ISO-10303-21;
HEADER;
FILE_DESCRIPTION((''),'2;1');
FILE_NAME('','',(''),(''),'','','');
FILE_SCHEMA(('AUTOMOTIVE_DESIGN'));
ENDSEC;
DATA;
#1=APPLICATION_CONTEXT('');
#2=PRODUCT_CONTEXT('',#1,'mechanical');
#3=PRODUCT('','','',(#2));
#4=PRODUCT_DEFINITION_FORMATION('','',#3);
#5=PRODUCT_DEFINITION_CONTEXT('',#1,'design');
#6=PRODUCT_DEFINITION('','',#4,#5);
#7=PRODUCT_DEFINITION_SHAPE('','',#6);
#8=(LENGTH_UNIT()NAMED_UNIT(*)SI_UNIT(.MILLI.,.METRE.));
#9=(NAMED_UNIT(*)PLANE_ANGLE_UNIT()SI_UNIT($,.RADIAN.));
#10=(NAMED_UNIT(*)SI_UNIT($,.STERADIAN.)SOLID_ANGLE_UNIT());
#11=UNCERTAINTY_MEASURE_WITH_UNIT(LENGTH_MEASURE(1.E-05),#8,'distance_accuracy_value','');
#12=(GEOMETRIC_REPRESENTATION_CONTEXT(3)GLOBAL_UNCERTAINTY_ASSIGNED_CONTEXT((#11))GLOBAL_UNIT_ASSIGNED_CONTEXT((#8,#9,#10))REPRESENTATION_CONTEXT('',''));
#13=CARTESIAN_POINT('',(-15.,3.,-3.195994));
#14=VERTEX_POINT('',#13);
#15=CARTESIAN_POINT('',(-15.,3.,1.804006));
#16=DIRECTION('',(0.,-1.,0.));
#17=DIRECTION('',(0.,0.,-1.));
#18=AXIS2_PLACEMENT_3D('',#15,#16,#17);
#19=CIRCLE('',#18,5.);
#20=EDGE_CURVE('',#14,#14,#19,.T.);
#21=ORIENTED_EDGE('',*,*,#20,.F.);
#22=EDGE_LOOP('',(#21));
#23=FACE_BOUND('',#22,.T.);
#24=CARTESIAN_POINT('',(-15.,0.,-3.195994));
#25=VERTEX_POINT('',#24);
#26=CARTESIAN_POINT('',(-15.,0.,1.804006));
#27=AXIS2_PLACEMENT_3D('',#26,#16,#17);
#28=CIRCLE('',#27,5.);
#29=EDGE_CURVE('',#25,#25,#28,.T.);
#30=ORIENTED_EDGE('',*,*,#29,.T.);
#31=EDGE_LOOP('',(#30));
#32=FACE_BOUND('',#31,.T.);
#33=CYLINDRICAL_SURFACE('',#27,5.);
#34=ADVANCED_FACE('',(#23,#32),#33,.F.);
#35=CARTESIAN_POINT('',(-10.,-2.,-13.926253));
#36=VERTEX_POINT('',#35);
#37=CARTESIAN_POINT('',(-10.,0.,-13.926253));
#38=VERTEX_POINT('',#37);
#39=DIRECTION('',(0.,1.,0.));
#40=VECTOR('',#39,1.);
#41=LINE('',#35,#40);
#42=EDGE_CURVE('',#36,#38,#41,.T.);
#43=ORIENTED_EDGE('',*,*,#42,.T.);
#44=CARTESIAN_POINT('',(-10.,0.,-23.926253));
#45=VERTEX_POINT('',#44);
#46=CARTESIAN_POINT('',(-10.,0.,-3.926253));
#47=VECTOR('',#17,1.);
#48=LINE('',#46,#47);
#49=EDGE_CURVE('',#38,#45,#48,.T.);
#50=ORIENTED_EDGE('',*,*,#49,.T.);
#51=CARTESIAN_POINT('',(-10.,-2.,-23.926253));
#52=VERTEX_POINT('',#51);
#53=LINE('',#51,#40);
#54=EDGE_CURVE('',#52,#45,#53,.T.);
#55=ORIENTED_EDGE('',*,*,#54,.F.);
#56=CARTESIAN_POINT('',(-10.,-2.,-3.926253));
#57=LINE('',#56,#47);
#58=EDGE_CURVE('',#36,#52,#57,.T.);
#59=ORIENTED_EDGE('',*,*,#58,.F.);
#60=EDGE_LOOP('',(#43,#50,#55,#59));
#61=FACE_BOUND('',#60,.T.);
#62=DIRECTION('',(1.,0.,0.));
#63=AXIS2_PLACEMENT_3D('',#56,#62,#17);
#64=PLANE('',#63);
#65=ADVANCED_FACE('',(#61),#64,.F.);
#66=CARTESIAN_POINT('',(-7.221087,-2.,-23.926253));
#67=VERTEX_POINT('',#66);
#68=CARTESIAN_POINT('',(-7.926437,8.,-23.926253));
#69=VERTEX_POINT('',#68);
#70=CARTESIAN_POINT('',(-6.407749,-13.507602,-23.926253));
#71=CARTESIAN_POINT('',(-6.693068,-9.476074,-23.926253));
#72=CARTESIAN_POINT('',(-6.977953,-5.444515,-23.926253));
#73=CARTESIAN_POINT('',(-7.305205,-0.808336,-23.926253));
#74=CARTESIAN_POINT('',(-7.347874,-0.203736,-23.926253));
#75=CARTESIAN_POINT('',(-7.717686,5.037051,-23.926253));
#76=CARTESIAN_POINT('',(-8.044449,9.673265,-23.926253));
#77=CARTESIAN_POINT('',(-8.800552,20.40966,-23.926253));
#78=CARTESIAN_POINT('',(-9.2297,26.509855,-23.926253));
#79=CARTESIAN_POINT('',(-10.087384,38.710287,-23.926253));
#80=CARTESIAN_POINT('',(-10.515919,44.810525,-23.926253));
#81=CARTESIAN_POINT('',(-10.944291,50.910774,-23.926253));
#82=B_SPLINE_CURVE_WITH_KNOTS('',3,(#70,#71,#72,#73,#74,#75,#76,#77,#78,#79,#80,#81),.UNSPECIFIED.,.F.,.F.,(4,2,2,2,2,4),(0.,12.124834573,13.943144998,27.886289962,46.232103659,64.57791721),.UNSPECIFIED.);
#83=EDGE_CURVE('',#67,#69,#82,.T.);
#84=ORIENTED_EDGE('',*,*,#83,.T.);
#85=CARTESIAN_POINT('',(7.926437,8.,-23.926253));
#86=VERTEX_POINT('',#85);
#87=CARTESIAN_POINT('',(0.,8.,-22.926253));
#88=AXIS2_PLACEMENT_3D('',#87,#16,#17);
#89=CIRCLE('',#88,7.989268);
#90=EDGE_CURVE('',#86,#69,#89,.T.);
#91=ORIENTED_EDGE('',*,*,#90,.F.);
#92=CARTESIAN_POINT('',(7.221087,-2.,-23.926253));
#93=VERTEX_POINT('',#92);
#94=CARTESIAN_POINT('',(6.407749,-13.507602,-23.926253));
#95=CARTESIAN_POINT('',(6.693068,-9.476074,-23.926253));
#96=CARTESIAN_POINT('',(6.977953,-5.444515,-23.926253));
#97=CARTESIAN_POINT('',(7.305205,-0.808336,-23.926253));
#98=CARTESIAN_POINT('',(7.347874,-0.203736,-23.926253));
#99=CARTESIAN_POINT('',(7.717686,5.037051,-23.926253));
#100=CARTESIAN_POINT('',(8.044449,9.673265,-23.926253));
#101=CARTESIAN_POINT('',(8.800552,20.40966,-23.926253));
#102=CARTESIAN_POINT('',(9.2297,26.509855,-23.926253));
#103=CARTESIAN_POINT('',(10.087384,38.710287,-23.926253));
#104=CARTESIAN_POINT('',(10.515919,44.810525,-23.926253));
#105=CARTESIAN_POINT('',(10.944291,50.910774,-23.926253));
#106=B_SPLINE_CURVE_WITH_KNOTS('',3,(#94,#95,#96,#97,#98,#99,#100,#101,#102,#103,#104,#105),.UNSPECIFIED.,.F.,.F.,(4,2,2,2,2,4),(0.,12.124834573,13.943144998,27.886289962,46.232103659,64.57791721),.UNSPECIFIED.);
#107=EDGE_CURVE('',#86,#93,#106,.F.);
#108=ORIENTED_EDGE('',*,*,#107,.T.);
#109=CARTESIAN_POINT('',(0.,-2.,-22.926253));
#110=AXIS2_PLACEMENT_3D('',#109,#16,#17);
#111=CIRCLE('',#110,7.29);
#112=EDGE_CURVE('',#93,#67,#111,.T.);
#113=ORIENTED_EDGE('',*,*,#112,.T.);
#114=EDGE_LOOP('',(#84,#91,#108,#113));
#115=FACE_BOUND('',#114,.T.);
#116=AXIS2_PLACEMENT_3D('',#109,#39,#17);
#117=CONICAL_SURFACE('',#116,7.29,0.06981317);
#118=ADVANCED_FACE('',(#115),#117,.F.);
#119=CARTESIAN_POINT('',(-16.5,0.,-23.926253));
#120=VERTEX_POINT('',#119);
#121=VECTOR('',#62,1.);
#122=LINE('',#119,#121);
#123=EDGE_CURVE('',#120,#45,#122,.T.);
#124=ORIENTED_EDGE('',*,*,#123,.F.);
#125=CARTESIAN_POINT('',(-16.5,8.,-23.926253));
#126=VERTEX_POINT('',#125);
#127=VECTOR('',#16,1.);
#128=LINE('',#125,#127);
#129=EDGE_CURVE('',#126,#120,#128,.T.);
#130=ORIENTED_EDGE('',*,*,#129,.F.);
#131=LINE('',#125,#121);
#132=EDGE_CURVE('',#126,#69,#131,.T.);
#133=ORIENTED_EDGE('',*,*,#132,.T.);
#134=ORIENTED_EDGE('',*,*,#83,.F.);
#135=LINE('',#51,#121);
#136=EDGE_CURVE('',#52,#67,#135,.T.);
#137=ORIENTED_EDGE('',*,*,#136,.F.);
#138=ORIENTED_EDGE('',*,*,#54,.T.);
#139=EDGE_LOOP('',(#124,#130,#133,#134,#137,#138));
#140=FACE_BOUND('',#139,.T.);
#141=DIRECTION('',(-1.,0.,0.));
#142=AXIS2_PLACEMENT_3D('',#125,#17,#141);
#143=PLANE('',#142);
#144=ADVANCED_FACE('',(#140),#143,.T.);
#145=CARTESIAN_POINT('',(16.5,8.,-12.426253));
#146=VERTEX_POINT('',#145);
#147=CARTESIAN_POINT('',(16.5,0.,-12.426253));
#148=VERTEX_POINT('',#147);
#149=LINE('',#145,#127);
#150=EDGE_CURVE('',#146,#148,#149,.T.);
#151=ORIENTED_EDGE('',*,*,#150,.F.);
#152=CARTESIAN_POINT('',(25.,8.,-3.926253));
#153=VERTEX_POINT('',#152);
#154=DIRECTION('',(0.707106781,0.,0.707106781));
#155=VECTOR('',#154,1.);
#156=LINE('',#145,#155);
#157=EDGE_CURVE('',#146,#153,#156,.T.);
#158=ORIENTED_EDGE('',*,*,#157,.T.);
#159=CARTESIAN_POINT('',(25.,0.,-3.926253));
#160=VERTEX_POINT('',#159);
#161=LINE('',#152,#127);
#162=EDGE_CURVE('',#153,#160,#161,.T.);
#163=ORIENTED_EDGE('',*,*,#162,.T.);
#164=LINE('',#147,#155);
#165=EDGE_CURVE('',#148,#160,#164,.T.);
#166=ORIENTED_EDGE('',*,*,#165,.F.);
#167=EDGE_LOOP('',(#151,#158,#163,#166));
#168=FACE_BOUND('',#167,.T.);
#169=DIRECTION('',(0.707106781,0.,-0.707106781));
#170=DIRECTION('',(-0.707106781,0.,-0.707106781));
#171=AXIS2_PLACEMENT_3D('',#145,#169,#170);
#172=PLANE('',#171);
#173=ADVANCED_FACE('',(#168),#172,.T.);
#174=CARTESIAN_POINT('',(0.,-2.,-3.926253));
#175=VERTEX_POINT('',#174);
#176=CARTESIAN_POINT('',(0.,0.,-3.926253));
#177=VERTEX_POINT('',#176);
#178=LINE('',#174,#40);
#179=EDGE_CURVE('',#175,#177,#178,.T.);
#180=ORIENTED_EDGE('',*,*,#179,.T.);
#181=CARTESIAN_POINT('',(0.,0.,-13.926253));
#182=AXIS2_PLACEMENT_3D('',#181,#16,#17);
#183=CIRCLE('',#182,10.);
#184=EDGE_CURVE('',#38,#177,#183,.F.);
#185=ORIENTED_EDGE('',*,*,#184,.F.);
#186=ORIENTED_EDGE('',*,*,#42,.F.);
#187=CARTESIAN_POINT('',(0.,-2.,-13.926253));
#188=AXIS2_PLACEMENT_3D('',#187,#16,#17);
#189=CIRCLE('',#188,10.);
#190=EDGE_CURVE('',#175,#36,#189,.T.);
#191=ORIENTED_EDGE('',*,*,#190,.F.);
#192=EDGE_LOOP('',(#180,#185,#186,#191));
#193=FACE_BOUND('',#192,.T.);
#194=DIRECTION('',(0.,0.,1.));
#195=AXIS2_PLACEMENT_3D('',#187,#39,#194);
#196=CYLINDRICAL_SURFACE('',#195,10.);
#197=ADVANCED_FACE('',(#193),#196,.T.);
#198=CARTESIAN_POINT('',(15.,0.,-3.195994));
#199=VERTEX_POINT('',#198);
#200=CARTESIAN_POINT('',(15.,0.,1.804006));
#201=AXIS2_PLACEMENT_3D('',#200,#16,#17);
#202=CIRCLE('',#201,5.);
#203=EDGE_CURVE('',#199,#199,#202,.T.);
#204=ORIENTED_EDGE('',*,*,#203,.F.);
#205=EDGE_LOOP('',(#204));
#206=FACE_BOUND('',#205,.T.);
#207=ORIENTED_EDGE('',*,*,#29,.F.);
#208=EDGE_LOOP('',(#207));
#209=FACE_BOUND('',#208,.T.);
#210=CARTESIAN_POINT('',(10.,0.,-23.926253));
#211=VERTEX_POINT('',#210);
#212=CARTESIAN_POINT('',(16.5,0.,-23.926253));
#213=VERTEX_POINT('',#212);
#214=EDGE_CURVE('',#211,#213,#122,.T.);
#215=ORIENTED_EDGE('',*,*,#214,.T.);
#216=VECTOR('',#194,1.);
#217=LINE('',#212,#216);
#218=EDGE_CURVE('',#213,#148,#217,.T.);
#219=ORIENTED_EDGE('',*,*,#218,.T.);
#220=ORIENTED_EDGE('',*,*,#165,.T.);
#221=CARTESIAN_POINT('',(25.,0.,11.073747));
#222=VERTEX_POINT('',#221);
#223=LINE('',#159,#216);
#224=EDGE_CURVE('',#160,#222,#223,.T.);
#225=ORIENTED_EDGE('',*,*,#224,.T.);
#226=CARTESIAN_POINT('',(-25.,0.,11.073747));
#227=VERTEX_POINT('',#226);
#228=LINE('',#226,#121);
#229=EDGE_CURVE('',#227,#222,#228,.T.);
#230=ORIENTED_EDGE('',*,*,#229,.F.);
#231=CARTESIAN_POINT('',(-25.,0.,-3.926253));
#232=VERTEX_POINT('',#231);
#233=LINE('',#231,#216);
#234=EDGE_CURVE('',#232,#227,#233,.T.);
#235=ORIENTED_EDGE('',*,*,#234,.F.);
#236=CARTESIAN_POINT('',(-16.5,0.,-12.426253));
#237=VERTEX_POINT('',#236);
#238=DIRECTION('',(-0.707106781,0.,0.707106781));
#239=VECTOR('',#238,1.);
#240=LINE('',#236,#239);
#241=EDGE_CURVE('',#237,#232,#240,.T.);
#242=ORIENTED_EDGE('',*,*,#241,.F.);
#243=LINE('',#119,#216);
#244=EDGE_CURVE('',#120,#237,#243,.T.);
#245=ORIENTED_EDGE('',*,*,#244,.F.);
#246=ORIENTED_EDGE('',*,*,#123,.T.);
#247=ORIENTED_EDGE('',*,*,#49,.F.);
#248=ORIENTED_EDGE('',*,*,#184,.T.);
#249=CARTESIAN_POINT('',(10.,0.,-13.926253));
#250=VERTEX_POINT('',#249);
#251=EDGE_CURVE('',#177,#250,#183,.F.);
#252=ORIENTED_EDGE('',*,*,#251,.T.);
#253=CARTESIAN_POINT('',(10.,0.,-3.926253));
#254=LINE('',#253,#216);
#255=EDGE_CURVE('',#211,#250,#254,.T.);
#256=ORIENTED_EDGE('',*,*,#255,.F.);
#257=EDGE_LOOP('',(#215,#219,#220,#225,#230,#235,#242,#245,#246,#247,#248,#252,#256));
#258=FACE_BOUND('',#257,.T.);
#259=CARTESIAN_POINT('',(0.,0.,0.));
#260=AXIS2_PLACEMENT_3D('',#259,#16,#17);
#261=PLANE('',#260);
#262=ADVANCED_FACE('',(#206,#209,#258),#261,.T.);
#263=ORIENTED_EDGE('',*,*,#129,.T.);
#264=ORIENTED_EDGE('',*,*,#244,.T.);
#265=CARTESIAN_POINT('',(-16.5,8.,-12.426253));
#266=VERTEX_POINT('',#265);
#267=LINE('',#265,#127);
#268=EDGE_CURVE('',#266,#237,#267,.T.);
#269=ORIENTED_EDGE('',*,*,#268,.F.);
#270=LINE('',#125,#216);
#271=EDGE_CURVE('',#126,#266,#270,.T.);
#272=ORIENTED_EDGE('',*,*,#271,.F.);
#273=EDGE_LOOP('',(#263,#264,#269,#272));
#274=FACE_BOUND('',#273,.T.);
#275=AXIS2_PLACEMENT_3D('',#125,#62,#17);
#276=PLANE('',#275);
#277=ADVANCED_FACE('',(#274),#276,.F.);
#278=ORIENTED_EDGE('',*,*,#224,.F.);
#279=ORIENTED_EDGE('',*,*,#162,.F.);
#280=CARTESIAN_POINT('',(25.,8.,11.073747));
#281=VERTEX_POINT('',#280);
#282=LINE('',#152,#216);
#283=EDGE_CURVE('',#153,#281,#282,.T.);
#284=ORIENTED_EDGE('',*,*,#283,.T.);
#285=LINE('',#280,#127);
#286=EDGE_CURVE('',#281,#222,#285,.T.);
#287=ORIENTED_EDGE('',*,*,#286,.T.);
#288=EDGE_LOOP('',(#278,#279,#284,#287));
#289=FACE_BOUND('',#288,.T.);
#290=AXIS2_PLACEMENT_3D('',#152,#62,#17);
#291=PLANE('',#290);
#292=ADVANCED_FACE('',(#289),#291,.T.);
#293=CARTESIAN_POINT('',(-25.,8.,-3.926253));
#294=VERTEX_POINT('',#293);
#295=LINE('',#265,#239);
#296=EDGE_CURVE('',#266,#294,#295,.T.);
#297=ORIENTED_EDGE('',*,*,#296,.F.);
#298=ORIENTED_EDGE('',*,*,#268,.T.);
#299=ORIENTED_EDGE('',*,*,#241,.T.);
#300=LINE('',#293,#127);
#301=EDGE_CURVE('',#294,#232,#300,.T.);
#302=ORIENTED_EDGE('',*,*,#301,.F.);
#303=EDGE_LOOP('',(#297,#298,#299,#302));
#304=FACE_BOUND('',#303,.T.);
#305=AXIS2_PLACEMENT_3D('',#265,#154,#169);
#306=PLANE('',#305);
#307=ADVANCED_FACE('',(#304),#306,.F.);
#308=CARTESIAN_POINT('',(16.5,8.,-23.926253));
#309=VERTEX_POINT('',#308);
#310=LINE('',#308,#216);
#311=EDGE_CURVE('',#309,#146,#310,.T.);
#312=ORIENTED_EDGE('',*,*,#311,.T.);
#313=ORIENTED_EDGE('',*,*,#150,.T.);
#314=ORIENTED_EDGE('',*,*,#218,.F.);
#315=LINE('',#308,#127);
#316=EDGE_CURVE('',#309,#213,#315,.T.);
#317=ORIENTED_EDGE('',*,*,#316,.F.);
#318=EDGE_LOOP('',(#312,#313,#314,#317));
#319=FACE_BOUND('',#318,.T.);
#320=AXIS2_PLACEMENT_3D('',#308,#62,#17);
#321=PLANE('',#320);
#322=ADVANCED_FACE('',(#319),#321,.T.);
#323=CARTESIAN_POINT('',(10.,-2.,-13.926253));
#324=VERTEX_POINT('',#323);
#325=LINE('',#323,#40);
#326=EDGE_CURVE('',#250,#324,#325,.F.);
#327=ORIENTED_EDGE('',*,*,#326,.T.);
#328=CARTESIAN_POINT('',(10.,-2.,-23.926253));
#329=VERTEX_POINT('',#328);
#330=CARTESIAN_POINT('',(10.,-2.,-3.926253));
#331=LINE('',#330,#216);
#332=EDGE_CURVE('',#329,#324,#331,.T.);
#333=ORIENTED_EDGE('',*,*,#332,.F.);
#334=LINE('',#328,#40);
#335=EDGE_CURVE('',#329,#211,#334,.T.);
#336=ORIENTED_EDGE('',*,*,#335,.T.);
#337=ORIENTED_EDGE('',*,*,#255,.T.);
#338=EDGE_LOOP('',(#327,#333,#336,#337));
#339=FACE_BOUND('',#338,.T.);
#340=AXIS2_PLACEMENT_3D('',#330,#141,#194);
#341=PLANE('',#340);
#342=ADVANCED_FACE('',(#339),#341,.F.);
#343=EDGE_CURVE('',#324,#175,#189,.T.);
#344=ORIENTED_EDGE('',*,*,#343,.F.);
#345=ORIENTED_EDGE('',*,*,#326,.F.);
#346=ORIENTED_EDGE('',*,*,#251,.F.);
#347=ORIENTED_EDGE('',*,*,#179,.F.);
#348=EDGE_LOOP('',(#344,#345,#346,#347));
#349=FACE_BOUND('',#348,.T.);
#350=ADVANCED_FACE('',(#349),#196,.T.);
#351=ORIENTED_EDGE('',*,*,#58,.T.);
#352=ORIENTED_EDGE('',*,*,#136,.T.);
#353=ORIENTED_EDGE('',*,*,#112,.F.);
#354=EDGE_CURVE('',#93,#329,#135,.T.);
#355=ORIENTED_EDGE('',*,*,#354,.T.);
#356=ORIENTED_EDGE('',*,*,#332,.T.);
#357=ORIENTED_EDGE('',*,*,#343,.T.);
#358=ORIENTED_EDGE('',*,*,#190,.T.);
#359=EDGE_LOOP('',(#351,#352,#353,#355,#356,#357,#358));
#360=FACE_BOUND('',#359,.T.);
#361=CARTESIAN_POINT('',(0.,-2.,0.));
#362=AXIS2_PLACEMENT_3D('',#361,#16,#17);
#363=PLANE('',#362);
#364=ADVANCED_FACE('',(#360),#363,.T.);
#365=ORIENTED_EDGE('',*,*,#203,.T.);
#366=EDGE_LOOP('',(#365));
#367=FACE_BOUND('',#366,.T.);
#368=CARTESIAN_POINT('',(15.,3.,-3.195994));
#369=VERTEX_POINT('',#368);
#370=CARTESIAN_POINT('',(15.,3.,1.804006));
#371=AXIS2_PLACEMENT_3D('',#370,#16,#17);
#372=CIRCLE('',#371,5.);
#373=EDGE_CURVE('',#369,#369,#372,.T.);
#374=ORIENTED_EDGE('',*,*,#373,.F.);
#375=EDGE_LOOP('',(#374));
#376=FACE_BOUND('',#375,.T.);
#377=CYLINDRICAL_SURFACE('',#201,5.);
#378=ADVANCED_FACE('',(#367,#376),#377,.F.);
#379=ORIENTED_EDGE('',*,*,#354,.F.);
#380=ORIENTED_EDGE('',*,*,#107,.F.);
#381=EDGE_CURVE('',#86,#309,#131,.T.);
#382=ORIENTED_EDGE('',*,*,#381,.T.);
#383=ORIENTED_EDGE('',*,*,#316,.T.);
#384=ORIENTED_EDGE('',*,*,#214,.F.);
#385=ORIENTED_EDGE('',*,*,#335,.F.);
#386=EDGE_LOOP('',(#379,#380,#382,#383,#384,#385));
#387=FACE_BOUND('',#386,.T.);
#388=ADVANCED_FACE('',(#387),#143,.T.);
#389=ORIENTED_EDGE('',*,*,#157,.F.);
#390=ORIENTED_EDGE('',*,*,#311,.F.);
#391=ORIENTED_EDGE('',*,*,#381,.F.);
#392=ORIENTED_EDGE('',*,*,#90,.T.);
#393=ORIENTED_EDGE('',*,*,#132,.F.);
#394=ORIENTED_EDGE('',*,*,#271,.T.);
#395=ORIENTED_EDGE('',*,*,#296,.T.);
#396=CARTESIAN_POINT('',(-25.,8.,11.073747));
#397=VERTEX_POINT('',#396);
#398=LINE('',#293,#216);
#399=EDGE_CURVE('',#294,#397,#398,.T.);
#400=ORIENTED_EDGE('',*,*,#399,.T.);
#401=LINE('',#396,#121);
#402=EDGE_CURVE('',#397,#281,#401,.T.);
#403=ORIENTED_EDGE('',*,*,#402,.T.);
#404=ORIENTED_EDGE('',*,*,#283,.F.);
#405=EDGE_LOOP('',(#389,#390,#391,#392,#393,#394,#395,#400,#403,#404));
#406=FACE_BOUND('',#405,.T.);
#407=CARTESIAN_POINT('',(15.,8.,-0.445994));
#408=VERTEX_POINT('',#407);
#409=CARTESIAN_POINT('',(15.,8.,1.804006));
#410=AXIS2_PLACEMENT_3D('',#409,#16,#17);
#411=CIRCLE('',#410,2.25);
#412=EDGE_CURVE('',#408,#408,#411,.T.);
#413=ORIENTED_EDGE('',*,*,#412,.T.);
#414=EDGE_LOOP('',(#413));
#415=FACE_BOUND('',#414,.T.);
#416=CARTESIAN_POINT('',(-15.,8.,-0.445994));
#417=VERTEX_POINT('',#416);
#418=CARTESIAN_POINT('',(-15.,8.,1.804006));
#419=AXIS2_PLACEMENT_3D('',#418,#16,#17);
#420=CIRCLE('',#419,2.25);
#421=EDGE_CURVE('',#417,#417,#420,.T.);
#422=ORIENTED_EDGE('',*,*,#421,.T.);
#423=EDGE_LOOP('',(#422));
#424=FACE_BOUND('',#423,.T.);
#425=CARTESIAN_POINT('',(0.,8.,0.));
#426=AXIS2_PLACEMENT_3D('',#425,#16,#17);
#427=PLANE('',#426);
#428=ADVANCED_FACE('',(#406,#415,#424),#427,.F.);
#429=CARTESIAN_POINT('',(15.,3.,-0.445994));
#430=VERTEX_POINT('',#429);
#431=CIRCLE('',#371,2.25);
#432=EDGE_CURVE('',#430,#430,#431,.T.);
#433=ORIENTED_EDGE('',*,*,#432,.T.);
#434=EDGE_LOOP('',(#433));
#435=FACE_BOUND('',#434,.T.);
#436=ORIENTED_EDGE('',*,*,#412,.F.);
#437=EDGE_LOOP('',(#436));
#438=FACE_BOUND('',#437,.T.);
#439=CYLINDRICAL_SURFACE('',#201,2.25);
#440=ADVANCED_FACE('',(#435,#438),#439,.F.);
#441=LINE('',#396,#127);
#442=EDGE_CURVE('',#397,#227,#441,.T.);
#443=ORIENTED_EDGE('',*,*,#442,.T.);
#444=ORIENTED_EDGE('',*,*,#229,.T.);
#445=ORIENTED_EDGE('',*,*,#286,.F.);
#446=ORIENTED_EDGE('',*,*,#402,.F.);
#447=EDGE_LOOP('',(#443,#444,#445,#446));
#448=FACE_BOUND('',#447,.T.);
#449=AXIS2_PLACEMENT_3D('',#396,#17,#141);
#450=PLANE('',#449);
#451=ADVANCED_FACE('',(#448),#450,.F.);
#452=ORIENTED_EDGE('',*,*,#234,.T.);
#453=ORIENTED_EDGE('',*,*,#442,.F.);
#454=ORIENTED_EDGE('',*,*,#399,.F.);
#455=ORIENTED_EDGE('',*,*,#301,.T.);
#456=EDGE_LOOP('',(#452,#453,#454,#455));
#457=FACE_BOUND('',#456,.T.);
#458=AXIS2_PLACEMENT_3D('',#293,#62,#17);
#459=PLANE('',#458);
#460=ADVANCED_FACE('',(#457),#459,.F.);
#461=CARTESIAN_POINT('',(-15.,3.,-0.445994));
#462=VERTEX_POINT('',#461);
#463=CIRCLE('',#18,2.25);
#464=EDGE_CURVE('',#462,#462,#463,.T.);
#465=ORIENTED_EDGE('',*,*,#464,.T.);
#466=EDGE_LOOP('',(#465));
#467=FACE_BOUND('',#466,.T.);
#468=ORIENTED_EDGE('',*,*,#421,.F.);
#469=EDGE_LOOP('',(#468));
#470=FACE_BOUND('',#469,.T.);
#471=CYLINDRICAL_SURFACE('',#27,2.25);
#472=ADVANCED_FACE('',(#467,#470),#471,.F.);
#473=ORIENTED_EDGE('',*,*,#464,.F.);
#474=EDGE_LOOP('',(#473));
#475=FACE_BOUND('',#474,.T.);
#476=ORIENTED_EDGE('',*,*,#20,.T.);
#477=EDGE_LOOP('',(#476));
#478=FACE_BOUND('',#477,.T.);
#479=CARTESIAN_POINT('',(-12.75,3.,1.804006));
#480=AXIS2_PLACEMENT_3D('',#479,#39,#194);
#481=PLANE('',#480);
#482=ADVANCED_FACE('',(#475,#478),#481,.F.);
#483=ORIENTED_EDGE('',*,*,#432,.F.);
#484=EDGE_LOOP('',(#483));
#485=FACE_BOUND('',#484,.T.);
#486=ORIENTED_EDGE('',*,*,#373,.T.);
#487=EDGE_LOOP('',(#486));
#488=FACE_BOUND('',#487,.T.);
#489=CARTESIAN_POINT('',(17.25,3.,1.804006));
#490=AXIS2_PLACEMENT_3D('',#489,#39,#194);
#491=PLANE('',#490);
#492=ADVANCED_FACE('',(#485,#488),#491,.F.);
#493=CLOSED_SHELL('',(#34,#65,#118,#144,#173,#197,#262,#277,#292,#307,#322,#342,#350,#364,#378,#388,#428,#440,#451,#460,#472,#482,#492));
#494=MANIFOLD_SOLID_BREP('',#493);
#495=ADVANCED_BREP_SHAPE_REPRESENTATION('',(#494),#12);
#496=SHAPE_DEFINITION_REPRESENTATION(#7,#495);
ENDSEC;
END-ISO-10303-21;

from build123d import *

# Parameters (mm, degrees)
BOSS_EXTRUDE1_DEPTH                     = 8
SKETCH2_W                               = 20
SKETCH2_H                               = 20
BOSS_EXTRUDE2_DEPTH                     = 2
FILLET1_R                               = 10
SKETCH3_R                               = 7.29
CUT_EXTRUDE1_DEPTH                      = 37.020349658
CUT_EXTRUDE1_DRAFT                      = 4
CBORE_FOR_M5_HEX_HEAD_BOLT1_D           = 4.5
CBORE_FOR_M5_HEX_HEAD_BOLT1_CBORE_D     = 10
CBORE_FOR_M5_HEX_HEAD_BOLT1_CBORE_DEPTH = 3


with BuildPart() as part:
    # Sketch1 → Boss-Extrude1 (new body)
    with BuildSketch(Plane(origin=(0, 0, 0), x_dir=(1, 0, 0), z_dir=(0, 1, 0))):
        Polygon((-25, 3.926253144), (-25, -11.073746856), (25, -11.073746856), (25, 3.926253144), (16.5, 12.426253144), (16.5, 23.926253144), (-16.5, 23.926253144), (-16.5, 12.426253144), align=None)
    extrude(amount=BOSS_EXTRUDE1_DEPTH)

    # Sketch2 → Boss-Extrude2 (add)
    with BuildSketch(Plane.XZ):
        with Locations((0, -13.926253144)):
            Rectangle(SKETCH2_W, SKETCH2_H)
    extrude(amount=BOSS_EXTRUDE2_DEPTH)

    # Fillet1
    fillet1_edges = [part.edges().sort_by_distance(p)[0] for p in [
        (-10, -1, -3.926253144),
        (10, -1, -3.926253144),
    ]]
    fillet(fillet1_edges, radius=FILLET1_R - 0.0001)  # a hair under: the kernel refuses the full size


with BuildPart() as cut_extrude1_tool:
    # Sketch3 → Cut-Extrude1 (with draft: the straight prism first)
    with BuildSketch(Plane.XZ.offset(2)):
        with Locations((0, -22.926253144)):
            Circle(SKETCH3_R)
    extrude(amount=-CUT_EXTRUDE1_DEPTH)
    # Cut-Extrude1: the draft: its side faces are tilted about the plane it starts from
    cut_extrude1_sides = [cut_extrude1_tool.faces().sort_by_distance(p)[0] for p in [
        (-7.29, 16.510174829, -22.926253144),
    ]]
    draft(cut_extrude1_sides, Plane.XZ.offset(2), CUT_EXTRUDE1_DRAFT)


with BuildPart() as part_1:
    add(part.part)

    # Cut-Extrude1: cut by cut_extrude1_tool
    add(cut_extrude1_tool.part, mode=Mode.SUBTRACT)

    # CBORE for M5 Hex Head Bolt1 (through all)
    with Locations(Plane(origin=(-15, 0, 1.804006093), x_dir=(0, 0, -1), z_dir=(0, -1, 0))):
        with Locations((0, 0), (0, 30)):
            CounterBoreHole(CBORE_FOR_M5_HEX_HEAD_BOLT1_D / 2, CBORE_FOR_M5_HEX_HEAD_BOLT1_CBORE_D / 2, CBORE_FOR_M5_HEX_HEAD_BOLT1_CBORE_DEPTH)


solid = part_1.part
